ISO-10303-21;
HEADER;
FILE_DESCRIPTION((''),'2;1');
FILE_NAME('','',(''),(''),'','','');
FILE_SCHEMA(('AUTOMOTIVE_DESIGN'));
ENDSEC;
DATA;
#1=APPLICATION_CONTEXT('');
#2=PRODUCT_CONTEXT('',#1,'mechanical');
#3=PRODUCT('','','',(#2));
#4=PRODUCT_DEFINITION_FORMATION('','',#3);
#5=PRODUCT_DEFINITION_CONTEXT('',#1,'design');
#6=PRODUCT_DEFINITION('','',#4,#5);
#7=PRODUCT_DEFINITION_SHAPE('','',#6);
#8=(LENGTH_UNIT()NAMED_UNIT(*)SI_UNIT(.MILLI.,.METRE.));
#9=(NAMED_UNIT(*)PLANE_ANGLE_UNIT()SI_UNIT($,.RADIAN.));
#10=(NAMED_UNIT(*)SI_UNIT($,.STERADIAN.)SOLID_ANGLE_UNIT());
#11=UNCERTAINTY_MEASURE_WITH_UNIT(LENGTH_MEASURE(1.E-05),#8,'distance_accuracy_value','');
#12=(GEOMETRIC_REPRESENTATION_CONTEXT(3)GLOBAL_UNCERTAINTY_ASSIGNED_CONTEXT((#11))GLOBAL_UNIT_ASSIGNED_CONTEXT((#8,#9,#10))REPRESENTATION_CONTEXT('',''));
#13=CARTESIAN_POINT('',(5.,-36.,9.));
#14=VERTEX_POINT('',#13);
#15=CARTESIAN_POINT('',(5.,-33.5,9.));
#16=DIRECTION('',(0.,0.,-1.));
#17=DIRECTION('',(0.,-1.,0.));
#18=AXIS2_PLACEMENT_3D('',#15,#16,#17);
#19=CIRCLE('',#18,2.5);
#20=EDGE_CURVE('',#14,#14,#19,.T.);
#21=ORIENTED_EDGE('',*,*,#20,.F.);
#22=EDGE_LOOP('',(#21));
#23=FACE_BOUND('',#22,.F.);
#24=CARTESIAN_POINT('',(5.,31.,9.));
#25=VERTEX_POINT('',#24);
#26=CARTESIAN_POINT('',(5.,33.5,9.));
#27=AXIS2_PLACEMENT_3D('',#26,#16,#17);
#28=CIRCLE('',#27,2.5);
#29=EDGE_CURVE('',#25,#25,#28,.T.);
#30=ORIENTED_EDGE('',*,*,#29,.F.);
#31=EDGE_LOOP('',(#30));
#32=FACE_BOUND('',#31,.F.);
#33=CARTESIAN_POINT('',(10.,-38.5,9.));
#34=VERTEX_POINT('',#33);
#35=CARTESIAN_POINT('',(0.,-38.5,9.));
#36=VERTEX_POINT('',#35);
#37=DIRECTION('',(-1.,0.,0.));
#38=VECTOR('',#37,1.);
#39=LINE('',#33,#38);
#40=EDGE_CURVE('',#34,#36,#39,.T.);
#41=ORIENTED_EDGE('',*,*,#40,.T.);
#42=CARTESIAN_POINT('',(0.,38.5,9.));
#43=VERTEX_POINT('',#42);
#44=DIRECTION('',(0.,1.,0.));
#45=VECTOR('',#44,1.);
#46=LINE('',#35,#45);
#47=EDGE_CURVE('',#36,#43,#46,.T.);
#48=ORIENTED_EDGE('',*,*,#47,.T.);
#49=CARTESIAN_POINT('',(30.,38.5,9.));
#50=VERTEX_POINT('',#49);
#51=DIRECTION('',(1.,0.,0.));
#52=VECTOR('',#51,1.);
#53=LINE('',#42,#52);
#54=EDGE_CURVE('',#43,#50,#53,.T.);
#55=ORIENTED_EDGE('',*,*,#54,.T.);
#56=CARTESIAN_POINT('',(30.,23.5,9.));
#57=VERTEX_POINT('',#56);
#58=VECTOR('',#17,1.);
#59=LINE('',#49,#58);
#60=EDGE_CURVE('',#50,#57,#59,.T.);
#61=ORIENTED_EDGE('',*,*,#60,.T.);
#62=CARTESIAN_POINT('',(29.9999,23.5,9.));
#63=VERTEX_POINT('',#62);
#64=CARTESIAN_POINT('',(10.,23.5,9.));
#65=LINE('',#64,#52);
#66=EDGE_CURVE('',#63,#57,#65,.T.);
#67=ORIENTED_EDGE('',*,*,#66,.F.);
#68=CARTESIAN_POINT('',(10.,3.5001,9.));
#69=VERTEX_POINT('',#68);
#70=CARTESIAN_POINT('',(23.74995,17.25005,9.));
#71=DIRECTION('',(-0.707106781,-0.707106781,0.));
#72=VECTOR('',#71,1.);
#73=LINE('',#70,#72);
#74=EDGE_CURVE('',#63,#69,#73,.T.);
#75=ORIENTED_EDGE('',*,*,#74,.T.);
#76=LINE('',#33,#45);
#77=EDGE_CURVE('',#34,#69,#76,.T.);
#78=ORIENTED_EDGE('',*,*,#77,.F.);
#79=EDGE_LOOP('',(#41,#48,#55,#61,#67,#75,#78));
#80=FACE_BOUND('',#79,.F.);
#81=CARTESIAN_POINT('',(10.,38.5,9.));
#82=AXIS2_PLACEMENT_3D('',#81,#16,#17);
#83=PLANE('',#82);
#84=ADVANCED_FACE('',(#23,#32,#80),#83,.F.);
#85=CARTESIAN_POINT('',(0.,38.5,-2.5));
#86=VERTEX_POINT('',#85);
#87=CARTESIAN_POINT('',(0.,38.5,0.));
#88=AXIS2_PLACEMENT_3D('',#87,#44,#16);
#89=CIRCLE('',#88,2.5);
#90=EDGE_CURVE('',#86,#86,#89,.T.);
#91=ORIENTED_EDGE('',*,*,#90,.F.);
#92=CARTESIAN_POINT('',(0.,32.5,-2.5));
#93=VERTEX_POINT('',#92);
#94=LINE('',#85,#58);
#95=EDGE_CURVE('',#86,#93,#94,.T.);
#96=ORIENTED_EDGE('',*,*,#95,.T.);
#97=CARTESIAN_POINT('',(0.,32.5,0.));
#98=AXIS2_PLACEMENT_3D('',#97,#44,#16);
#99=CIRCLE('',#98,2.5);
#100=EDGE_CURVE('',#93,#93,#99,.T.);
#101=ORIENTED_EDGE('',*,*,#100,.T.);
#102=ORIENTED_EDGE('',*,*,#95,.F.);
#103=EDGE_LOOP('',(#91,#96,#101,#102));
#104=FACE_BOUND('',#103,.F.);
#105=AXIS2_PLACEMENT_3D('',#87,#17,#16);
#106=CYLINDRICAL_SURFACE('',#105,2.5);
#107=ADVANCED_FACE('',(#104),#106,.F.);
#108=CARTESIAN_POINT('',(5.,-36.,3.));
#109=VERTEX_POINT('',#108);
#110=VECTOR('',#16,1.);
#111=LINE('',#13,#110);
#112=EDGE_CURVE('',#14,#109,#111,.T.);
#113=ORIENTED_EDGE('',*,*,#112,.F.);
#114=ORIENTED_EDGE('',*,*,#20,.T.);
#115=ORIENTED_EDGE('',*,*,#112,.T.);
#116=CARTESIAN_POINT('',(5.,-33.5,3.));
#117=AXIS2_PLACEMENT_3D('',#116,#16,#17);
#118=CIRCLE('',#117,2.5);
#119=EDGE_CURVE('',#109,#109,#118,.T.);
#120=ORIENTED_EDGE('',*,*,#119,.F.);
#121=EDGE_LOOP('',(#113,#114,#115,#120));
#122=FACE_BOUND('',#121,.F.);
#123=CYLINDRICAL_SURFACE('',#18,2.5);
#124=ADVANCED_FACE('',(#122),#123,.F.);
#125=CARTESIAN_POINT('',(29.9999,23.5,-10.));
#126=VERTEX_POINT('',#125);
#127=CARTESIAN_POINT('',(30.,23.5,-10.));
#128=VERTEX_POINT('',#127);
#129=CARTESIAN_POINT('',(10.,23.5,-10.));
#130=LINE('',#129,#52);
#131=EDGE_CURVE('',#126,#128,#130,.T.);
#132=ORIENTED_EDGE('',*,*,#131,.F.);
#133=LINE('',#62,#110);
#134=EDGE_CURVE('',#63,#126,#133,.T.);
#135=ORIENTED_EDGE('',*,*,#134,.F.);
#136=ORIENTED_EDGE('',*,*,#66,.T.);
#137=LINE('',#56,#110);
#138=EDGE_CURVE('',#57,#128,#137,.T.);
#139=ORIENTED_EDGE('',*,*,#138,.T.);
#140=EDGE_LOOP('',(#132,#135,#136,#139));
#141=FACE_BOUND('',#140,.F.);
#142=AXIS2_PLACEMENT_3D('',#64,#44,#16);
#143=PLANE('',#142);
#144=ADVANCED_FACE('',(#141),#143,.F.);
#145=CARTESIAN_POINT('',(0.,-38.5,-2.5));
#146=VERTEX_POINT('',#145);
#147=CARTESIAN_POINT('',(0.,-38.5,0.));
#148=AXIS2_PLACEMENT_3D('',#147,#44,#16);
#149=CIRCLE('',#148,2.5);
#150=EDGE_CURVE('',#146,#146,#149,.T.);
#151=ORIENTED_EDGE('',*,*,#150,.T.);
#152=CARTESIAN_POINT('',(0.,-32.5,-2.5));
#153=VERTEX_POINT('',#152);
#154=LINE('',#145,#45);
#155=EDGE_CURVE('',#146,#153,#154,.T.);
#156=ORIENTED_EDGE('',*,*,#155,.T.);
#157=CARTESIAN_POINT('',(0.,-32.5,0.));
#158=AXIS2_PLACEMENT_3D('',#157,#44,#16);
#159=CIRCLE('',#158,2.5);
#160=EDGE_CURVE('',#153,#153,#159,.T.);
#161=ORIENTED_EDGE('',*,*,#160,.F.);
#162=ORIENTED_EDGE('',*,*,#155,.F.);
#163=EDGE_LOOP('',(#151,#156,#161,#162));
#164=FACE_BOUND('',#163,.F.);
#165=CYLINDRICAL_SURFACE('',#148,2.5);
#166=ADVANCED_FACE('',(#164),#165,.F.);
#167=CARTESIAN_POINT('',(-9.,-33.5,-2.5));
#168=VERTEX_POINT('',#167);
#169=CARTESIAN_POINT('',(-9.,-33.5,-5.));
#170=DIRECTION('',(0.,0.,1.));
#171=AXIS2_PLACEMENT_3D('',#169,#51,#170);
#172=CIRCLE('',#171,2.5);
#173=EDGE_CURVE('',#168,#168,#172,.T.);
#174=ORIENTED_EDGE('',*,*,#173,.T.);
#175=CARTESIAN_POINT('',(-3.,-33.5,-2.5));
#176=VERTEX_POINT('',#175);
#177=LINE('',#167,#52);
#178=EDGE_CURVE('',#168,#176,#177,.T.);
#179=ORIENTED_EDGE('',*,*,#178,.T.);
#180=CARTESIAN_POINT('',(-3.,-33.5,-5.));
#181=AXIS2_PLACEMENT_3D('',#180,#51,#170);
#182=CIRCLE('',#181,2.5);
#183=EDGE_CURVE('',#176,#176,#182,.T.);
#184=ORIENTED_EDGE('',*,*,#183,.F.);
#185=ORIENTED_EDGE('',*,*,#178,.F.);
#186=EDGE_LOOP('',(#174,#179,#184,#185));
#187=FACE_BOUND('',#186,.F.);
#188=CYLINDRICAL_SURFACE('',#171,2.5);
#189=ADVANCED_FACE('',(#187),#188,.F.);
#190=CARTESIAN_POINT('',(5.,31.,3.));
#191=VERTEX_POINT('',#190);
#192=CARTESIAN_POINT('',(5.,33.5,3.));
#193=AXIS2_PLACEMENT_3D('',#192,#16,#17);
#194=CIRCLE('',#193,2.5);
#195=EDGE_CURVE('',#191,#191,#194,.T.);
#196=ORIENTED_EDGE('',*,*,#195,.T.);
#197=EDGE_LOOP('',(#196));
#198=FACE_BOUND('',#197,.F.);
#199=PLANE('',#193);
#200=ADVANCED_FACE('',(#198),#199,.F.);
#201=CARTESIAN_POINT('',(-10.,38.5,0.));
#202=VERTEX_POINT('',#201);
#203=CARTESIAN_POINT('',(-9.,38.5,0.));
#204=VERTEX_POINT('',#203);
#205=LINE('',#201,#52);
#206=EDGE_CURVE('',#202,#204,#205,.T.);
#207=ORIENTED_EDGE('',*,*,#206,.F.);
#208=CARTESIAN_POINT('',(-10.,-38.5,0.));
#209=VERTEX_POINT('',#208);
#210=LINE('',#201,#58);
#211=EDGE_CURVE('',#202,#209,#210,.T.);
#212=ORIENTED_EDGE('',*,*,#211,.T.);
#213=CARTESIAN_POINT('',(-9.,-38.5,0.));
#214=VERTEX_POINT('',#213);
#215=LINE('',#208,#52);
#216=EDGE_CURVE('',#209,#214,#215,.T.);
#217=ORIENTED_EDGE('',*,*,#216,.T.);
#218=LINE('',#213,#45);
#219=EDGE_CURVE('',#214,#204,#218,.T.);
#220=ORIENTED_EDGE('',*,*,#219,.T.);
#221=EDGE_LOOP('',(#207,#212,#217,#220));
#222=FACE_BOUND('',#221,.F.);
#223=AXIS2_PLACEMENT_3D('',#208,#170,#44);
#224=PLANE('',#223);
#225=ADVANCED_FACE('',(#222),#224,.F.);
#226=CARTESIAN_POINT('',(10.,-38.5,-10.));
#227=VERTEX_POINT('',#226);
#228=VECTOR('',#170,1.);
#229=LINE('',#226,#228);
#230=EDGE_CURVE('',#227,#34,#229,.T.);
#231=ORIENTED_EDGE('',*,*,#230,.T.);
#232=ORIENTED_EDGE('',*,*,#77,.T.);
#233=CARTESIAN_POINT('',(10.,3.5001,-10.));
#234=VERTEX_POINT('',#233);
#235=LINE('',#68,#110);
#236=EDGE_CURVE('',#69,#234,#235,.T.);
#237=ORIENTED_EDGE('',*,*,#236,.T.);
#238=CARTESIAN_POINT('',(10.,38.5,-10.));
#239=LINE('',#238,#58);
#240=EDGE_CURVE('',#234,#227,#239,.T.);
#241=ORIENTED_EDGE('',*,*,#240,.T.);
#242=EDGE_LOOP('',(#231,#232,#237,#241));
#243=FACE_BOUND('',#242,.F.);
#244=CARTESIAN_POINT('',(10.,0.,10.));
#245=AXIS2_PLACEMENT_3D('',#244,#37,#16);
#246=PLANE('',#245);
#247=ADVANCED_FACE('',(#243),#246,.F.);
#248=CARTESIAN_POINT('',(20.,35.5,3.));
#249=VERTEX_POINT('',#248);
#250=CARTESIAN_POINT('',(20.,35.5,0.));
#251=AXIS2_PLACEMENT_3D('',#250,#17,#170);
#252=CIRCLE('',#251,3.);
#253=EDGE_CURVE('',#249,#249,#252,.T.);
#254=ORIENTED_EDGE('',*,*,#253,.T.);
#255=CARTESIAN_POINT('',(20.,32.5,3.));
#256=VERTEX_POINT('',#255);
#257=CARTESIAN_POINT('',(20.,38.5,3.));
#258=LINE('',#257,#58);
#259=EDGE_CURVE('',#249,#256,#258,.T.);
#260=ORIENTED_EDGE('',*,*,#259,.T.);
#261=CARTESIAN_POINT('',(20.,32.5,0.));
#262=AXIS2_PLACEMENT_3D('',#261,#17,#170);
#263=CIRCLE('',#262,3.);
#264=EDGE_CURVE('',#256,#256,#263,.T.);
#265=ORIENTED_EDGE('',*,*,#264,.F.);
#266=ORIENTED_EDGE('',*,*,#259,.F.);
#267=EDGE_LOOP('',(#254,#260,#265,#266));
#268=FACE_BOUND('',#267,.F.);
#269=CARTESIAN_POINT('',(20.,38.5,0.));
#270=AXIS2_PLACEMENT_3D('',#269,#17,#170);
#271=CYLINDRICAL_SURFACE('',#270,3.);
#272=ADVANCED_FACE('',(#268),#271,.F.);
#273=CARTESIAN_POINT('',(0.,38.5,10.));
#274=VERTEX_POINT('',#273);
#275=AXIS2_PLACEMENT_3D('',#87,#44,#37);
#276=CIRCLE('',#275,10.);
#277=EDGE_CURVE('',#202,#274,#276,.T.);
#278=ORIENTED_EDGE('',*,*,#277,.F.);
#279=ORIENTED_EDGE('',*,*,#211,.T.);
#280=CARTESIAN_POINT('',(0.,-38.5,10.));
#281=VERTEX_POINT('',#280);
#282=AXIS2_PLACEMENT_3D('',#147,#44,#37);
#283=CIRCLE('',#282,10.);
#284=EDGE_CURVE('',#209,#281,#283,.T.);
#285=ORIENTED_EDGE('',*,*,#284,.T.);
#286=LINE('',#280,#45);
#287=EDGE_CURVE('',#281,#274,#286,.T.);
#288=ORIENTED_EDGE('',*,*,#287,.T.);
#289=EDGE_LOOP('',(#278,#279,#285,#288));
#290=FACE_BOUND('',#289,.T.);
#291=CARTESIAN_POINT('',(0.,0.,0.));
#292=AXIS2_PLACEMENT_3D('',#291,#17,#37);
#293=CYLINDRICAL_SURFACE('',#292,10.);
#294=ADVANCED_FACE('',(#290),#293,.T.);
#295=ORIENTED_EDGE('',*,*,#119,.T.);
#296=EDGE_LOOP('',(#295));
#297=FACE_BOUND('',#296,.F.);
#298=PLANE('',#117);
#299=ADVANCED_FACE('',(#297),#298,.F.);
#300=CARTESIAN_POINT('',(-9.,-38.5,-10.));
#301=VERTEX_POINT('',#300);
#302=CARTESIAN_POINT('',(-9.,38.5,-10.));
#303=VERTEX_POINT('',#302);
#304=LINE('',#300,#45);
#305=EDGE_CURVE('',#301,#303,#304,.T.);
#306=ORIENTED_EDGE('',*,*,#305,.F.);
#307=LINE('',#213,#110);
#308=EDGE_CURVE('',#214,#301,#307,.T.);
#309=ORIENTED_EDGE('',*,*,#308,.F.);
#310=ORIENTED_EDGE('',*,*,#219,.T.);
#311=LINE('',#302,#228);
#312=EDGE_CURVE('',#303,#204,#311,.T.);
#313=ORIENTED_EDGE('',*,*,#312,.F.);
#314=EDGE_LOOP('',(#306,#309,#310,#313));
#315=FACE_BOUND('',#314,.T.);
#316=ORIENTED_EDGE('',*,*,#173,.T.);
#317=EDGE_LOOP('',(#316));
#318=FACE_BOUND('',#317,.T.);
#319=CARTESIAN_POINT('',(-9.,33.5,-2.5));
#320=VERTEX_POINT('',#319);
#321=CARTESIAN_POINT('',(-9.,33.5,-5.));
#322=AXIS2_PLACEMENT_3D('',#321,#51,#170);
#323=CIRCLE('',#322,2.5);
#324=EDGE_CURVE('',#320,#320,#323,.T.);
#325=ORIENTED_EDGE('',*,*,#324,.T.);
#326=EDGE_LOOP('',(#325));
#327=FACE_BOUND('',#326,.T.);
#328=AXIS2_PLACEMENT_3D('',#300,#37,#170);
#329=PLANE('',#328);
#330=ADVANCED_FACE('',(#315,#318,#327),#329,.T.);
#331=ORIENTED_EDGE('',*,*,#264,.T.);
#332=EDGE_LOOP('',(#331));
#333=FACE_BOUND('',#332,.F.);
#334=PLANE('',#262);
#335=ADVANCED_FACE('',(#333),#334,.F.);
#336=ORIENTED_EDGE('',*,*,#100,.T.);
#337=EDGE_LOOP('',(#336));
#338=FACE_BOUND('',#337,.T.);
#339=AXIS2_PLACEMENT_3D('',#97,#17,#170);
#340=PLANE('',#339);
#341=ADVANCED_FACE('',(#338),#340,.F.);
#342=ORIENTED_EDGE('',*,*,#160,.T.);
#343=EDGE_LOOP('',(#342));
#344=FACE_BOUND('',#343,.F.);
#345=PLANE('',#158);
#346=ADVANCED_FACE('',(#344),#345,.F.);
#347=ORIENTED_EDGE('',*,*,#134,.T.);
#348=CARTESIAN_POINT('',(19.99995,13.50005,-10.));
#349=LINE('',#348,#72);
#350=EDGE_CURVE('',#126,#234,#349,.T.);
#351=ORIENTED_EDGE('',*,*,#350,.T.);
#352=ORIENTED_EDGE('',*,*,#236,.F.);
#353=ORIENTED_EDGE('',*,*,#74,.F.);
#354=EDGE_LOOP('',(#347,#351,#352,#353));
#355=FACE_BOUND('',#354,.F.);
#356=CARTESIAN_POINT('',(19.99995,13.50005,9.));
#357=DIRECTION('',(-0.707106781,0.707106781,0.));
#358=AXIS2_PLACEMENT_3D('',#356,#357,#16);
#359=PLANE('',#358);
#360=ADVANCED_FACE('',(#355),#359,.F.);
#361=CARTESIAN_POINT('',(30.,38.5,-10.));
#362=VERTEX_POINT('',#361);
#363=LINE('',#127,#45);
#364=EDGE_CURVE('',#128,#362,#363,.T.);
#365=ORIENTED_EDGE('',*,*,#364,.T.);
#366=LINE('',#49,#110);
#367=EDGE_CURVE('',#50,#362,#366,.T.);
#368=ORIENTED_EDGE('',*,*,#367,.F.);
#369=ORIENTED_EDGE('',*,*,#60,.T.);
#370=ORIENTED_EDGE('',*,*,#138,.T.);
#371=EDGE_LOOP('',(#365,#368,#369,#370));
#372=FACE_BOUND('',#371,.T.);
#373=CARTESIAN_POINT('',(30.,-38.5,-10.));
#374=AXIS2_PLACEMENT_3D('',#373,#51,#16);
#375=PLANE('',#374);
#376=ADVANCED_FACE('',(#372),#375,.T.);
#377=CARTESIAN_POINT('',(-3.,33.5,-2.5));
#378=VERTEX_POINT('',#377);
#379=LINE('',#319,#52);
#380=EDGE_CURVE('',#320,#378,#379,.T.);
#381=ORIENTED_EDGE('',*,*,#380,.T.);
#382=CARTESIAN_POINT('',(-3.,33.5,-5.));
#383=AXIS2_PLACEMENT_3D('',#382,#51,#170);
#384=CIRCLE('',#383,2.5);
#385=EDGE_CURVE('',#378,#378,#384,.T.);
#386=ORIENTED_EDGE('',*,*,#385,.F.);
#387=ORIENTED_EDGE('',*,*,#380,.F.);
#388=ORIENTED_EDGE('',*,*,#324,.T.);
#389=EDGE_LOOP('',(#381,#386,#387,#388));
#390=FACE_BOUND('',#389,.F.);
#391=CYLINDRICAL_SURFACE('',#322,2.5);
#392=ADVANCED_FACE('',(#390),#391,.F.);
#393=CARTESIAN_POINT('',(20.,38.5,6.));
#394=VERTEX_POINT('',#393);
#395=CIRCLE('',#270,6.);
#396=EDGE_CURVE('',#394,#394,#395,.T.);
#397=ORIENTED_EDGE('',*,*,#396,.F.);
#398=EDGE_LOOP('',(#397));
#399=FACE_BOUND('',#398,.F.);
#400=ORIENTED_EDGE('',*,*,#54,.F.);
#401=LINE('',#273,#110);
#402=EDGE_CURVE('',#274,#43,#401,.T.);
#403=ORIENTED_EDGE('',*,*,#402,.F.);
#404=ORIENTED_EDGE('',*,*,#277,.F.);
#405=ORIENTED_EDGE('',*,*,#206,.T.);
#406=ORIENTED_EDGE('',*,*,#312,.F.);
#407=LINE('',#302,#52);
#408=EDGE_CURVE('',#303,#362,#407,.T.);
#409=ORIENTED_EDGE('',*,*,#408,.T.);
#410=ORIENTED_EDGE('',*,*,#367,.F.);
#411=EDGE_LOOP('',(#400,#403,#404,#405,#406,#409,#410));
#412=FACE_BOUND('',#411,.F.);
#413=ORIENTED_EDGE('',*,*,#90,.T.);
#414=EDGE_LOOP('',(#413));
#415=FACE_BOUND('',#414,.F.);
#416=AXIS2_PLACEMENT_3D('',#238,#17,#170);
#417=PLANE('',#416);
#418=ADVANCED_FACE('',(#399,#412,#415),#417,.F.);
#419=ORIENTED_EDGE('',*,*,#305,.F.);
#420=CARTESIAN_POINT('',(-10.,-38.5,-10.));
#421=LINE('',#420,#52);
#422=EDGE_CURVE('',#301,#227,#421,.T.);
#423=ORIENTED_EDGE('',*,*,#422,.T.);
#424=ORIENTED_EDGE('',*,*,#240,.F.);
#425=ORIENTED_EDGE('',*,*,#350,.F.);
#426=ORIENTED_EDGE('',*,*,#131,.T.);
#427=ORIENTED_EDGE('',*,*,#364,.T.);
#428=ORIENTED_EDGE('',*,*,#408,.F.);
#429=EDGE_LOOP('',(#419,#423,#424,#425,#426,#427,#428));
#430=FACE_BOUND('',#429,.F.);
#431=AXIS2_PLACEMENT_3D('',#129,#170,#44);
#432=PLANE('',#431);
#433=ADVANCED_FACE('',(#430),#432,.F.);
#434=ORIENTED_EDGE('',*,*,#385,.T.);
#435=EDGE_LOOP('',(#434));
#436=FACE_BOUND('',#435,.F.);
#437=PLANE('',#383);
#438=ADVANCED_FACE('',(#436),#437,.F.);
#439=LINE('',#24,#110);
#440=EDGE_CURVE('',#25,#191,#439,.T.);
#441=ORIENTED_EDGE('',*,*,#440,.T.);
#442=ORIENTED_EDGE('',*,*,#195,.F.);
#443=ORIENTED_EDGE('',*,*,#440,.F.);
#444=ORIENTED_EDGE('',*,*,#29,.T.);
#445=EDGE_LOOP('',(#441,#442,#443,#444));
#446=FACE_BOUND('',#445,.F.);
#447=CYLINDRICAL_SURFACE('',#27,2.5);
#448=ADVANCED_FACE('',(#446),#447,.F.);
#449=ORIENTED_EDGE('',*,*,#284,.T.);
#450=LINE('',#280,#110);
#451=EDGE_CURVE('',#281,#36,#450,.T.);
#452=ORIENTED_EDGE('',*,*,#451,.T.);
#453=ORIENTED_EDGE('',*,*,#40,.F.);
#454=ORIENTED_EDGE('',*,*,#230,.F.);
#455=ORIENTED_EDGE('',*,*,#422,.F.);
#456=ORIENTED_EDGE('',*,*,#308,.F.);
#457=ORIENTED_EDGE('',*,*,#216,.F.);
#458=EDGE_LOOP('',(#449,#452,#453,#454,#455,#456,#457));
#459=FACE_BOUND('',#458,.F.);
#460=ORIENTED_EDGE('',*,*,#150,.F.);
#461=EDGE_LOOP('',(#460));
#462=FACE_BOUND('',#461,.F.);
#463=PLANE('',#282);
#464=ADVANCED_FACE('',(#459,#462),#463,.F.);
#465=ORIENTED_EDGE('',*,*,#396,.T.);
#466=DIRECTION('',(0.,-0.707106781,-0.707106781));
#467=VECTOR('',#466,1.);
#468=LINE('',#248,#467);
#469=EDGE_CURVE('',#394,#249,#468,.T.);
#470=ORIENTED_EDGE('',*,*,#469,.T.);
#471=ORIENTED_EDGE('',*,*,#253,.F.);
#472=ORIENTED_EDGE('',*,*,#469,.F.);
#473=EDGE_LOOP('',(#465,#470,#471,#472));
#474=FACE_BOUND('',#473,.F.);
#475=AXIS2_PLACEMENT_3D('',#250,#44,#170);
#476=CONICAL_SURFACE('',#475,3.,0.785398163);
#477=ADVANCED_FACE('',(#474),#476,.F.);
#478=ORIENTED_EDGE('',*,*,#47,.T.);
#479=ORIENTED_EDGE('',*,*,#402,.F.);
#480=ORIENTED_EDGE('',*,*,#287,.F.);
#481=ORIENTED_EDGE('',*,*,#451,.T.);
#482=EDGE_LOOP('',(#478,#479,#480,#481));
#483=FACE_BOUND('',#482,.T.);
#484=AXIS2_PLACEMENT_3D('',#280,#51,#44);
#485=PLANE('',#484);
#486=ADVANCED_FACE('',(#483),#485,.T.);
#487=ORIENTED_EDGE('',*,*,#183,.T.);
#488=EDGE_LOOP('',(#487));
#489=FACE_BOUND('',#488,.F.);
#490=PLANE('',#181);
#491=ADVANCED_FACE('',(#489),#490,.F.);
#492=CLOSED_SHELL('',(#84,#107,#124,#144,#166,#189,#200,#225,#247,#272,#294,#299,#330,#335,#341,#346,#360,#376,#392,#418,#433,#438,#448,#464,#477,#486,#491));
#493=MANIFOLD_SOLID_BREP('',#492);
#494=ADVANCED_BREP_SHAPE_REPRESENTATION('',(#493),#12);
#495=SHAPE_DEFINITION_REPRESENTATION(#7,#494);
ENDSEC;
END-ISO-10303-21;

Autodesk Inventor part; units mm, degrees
ref_plane "YZ Plane" through (0, 0, 0) normal (1, 0, 0) x (0, 1, 0)
ref_plane "XZ Plane" through (0, 0, 0) normal (0, 1, 0) x (-1, 0, 0)
ref_plane "XY Plane" through (0, 0, 0) normal (0, 0, 1) x (1, 0, 0)
sketch "スケッチ1" plane through (0, 0, 0) normal (0, 1, 0) x (-1, 0, 0)
  circle A0 centre (0, 0) radius 10
  line L0 (0, 10) -> (-10, 10)
  line L1 (-10, 10) -> (-10, -10)
  line L2 (-10, -10) -> (10, -10)
  line L3 (10, -10) -> (10, 0)
  dimension "d0" = 20
  dimension "d1" = 10
  dimension "d2" = 10
extrude "押し出し1" add sketch "スケッチ1" along normal mid plane 77
sketch "スケッチ2" plane through (0, -38.5, 10) normal (0, 0, 1) x (1, 0, 0)
  line L0 (10, 0) -> (10, 77) projected
  line L1 (0, 77) -> (10, 77) projected
  line L2 (0, 0) -> (0, 77) projected
  line L3 (10, 0) -> (0, 0) projected
extrude "押し出し2" cut sketch "スケッチ2" against normal blind 1
sketch "スケッチ3" plane through (-10, -38.5, -10) normal (-1, 0, 0) x (0, 0, 1)
  line L0 (0, 77) -> (10, 77) projected
  line L1 (10, 0) -> (10, 77) projected
  line L2 (10, 0) -> (0, 0) projected
  line L3 (0, 0) -> (0, 77) projected
  point P0 (10, 38.5)
extrude "押し出し3" cut sketch "スケッチ3" against normal blind 1
sketch "スケッチ4" plane through (0, -38.5, 9) normal (0, 0, 1) x (1, 0, 0)
  line L0 (0, 77) -> (10, 77) projected
  line L1 (10, 77) -> (10, 0) projected
  line L2 (10, 0) -> (0, 0) projected
  point P0 (0, 38.5)
  point P1 (5, 72)
  point P2 (5, 5)
  dimension "d9" = 5
  dimension "d10" = 5
  dimension "d11" = 5
hole "穴1" at (5, 33.5, 9) at (5, -33.5, 9) direction (0, 0, -1) diameter 5 depth 6
sketch "スケッチ5" plane through (0, -38.5, 0) normal (0, 1, 0) x (1, 0, 0)
  point P0 (0, 0)
hole "穴2" at (0, -38.5, 0) direction (0, 1, 0) diameter 5 depth 6
sketch "スケッチ6" plane through (-9, -38.5, -10) normal (-1, 0, 0) x (0, 0, 1)
  line L0 (0, 0) -> (0, 77) projected
  line L1 (0, 77) -> (10, 77) projected
  line L2 (10, 0) -> (0, 0) projected
  point P0 (10, 38.5)
  point P1 (5, 72)
  point P2 (5, 5)
  dimension "d26" = 5
  dimension "d27" = 5
  dimension "d28" = 5
  dimension "d29" = 5
hole "穴3" at (-9, 33.5, -5) at (-9, -33.5, -5) direction (1, 0, 0) diameter 5 depth 6
mirror "ミラー1" about plane through (0, 0, 0) normal (0, 1, 0) of "穴2"
sketch "スケッチ9" plane through (10, -38.5, -10) normal (1, 0, 0) x (0, 0, -1)
  line L0 (0, 77) -> (-10, 77) projected
  line L1 (-19, 77) -> (-19, 0) projected
  line L2 (0, 77) -> (-19, 77)
  line L3 (-19, 77) -> (-19, 62)
  line L4 (-19, 62) -> (0, 62)
  line L5 (0, 62) -> (0, 77)
  point P0 (-10, 38.5)
  dimension "d47" = 15
extrude "押し出し6" add sketch "スケッチ9" along normal blind 20
sketch "スケッチ10" plane through (0, 38.5, 0) normal (0, 1, 0) x (1, 0, 0)
  line L0 (30, 10) -> (30, -9) projected
  point P0 (0, 0)
  point P1 (20, 0)
  dimension "d50" = 10
hole "穴4" at (20, 38.5, 0) direction (0, -1, 0) diameter 6 depth 6
chamfer "面取り2" distance 3 angle 45 1 edges at (20, 38.5, -3)
chamfer "面取り3" distance 20 angle 45 1 edges at (10, 23.5, -0.5)
equation "\"d11\" = d9"
properties part number "base8" material "ABS プラスチック"
